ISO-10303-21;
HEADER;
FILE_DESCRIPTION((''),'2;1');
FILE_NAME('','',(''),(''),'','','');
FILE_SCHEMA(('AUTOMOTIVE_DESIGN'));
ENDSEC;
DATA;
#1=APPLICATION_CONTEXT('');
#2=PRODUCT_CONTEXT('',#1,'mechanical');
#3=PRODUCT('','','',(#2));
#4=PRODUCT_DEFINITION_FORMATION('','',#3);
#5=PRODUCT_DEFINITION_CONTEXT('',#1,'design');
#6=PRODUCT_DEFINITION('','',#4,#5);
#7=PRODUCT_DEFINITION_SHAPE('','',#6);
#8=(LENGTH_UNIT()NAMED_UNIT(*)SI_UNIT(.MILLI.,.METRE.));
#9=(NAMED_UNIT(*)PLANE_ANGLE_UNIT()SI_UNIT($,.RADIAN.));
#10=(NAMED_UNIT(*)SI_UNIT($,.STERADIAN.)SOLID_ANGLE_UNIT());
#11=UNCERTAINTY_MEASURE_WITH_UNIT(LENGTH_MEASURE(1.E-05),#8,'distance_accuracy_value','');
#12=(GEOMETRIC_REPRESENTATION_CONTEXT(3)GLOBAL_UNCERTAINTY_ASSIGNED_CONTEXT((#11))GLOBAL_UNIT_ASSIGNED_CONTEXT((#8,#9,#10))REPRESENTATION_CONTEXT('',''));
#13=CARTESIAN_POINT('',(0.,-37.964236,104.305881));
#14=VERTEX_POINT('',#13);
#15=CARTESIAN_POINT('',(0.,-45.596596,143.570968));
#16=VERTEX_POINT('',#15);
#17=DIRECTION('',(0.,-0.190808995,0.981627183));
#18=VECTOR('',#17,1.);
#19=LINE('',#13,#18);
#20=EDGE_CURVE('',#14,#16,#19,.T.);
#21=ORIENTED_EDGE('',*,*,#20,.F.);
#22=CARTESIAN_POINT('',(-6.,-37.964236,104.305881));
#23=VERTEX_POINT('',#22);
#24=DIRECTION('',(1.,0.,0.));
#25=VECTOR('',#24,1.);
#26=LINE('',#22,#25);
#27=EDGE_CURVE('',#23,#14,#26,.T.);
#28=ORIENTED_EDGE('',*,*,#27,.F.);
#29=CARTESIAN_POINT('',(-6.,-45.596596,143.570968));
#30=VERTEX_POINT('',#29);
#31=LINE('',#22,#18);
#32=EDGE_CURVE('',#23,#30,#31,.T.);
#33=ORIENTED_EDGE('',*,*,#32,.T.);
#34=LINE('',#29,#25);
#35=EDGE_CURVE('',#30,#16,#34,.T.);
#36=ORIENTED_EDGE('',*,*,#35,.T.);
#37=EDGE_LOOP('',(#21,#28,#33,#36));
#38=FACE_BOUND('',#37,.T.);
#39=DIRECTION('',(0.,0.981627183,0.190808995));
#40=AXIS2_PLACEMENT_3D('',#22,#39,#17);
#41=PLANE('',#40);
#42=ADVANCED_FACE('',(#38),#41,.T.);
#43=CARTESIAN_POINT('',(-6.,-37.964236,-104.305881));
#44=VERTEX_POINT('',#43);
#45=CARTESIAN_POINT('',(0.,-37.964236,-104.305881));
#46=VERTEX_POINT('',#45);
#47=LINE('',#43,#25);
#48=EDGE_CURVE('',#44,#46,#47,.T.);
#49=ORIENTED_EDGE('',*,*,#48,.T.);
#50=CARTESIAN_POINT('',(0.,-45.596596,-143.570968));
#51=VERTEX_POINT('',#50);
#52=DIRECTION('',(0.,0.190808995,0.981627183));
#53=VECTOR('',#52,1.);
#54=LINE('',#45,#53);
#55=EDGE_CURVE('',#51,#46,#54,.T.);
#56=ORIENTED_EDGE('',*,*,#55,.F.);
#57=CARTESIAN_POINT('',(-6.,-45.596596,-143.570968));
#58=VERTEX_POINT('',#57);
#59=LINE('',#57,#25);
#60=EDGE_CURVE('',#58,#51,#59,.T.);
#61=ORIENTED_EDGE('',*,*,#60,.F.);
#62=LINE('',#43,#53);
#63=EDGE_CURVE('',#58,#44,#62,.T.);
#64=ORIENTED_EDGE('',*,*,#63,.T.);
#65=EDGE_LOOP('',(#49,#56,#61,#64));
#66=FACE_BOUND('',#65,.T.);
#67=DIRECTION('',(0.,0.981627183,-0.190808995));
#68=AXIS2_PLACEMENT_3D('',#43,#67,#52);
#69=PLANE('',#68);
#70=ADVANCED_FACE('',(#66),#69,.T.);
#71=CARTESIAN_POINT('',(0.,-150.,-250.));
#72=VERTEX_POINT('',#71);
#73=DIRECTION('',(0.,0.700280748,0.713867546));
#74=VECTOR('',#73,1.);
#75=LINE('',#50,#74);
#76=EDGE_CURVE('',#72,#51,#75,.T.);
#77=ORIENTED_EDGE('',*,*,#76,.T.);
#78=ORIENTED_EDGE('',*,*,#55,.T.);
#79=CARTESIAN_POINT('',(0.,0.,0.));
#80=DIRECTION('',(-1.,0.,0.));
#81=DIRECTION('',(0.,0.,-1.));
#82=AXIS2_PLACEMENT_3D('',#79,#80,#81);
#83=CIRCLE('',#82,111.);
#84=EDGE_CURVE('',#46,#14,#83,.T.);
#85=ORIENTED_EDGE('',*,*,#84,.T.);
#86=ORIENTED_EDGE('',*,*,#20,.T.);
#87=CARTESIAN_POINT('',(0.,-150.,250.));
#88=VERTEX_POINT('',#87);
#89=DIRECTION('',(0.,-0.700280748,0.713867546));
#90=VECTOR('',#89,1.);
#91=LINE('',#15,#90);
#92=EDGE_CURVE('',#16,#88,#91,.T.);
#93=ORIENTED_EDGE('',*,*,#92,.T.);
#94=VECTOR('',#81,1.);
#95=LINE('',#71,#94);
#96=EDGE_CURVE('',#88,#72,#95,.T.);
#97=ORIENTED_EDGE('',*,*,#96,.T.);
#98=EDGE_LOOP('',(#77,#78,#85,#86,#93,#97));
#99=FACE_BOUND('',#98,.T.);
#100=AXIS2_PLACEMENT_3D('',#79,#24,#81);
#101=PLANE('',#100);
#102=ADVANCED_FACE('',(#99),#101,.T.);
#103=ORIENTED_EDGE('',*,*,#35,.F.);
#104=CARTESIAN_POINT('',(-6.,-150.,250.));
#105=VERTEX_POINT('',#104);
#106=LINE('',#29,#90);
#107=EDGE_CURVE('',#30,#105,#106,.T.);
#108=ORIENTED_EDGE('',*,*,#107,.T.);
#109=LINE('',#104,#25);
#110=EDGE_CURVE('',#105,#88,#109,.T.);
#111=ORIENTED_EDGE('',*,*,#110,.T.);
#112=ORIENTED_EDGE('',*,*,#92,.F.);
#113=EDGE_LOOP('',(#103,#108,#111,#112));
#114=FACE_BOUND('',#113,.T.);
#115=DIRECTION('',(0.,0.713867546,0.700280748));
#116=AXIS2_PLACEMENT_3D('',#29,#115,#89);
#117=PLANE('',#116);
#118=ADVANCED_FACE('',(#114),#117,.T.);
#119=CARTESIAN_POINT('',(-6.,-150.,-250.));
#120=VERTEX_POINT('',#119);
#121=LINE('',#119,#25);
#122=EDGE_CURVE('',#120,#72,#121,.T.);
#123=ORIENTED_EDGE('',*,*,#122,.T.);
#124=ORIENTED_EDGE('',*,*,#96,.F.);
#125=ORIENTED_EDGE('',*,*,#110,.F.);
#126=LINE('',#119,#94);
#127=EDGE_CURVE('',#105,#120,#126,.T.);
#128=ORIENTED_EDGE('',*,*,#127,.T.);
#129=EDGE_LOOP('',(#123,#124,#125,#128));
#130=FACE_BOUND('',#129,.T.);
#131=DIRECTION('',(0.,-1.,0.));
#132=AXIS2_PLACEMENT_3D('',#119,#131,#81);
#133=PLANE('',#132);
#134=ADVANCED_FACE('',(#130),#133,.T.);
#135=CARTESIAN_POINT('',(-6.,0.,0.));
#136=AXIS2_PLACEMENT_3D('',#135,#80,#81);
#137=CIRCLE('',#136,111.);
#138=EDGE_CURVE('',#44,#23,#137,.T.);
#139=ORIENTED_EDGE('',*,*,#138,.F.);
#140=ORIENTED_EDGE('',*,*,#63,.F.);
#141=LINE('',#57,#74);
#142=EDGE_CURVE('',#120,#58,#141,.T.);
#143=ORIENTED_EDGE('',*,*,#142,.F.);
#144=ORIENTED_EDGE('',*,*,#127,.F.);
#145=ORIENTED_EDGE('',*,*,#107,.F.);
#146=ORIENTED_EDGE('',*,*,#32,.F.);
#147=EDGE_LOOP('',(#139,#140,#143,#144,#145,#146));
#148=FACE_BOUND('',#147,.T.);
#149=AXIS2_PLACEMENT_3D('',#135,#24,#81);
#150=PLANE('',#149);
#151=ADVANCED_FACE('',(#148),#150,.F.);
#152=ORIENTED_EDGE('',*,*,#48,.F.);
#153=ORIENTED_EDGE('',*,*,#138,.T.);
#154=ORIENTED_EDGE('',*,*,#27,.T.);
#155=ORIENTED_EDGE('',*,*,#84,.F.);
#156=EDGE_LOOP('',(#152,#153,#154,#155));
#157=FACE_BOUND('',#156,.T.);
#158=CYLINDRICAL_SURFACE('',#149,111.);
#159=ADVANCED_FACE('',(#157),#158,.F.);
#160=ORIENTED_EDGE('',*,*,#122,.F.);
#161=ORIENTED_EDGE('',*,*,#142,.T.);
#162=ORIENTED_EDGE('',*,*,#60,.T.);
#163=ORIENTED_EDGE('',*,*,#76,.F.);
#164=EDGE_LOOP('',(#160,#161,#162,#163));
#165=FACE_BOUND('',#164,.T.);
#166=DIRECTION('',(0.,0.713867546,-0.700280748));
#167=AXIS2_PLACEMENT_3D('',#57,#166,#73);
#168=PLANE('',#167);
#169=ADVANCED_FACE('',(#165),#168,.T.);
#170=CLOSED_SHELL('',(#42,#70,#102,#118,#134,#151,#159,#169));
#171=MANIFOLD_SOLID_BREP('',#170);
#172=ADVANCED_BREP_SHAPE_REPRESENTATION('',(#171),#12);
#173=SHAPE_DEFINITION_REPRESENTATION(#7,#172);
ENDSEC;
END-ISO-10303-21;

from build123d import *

# Parameters (mm, degrees)
SM_BASE_FLANGE_1_DEPTH = 6


# Sheet-metal steps are written as plain solids
with BuildPart() as part:
    # Sketch 1 → Базовая кромка1 (new body)
    with BuildSketch(Plane(origin=(0, 0, 0), x_dir=(0, 0, -1), z_dir=(1, 0, 0))):
        with BuildLine():
            Line((250, -150), (-250, -150))
            Line((-250, -150), (-143.570968245, -45.596595724))
            Line((-143.570968245, -45.596595724), (-104.305880907, -37.964235909))
            ThreePointArc((-104.305880907, -37.964235909), (0, -111), (104.305880907, -37.964235909))
            Line((104.305880907, -37.964235909), (143.570968245, -45.596595724))
            Line((143.570968245, -45.596595724), (250, -150))
        make_face()
    extrude(amount=-SM_BASE_FLANGE_1_DEPTH)


solid = part.part
